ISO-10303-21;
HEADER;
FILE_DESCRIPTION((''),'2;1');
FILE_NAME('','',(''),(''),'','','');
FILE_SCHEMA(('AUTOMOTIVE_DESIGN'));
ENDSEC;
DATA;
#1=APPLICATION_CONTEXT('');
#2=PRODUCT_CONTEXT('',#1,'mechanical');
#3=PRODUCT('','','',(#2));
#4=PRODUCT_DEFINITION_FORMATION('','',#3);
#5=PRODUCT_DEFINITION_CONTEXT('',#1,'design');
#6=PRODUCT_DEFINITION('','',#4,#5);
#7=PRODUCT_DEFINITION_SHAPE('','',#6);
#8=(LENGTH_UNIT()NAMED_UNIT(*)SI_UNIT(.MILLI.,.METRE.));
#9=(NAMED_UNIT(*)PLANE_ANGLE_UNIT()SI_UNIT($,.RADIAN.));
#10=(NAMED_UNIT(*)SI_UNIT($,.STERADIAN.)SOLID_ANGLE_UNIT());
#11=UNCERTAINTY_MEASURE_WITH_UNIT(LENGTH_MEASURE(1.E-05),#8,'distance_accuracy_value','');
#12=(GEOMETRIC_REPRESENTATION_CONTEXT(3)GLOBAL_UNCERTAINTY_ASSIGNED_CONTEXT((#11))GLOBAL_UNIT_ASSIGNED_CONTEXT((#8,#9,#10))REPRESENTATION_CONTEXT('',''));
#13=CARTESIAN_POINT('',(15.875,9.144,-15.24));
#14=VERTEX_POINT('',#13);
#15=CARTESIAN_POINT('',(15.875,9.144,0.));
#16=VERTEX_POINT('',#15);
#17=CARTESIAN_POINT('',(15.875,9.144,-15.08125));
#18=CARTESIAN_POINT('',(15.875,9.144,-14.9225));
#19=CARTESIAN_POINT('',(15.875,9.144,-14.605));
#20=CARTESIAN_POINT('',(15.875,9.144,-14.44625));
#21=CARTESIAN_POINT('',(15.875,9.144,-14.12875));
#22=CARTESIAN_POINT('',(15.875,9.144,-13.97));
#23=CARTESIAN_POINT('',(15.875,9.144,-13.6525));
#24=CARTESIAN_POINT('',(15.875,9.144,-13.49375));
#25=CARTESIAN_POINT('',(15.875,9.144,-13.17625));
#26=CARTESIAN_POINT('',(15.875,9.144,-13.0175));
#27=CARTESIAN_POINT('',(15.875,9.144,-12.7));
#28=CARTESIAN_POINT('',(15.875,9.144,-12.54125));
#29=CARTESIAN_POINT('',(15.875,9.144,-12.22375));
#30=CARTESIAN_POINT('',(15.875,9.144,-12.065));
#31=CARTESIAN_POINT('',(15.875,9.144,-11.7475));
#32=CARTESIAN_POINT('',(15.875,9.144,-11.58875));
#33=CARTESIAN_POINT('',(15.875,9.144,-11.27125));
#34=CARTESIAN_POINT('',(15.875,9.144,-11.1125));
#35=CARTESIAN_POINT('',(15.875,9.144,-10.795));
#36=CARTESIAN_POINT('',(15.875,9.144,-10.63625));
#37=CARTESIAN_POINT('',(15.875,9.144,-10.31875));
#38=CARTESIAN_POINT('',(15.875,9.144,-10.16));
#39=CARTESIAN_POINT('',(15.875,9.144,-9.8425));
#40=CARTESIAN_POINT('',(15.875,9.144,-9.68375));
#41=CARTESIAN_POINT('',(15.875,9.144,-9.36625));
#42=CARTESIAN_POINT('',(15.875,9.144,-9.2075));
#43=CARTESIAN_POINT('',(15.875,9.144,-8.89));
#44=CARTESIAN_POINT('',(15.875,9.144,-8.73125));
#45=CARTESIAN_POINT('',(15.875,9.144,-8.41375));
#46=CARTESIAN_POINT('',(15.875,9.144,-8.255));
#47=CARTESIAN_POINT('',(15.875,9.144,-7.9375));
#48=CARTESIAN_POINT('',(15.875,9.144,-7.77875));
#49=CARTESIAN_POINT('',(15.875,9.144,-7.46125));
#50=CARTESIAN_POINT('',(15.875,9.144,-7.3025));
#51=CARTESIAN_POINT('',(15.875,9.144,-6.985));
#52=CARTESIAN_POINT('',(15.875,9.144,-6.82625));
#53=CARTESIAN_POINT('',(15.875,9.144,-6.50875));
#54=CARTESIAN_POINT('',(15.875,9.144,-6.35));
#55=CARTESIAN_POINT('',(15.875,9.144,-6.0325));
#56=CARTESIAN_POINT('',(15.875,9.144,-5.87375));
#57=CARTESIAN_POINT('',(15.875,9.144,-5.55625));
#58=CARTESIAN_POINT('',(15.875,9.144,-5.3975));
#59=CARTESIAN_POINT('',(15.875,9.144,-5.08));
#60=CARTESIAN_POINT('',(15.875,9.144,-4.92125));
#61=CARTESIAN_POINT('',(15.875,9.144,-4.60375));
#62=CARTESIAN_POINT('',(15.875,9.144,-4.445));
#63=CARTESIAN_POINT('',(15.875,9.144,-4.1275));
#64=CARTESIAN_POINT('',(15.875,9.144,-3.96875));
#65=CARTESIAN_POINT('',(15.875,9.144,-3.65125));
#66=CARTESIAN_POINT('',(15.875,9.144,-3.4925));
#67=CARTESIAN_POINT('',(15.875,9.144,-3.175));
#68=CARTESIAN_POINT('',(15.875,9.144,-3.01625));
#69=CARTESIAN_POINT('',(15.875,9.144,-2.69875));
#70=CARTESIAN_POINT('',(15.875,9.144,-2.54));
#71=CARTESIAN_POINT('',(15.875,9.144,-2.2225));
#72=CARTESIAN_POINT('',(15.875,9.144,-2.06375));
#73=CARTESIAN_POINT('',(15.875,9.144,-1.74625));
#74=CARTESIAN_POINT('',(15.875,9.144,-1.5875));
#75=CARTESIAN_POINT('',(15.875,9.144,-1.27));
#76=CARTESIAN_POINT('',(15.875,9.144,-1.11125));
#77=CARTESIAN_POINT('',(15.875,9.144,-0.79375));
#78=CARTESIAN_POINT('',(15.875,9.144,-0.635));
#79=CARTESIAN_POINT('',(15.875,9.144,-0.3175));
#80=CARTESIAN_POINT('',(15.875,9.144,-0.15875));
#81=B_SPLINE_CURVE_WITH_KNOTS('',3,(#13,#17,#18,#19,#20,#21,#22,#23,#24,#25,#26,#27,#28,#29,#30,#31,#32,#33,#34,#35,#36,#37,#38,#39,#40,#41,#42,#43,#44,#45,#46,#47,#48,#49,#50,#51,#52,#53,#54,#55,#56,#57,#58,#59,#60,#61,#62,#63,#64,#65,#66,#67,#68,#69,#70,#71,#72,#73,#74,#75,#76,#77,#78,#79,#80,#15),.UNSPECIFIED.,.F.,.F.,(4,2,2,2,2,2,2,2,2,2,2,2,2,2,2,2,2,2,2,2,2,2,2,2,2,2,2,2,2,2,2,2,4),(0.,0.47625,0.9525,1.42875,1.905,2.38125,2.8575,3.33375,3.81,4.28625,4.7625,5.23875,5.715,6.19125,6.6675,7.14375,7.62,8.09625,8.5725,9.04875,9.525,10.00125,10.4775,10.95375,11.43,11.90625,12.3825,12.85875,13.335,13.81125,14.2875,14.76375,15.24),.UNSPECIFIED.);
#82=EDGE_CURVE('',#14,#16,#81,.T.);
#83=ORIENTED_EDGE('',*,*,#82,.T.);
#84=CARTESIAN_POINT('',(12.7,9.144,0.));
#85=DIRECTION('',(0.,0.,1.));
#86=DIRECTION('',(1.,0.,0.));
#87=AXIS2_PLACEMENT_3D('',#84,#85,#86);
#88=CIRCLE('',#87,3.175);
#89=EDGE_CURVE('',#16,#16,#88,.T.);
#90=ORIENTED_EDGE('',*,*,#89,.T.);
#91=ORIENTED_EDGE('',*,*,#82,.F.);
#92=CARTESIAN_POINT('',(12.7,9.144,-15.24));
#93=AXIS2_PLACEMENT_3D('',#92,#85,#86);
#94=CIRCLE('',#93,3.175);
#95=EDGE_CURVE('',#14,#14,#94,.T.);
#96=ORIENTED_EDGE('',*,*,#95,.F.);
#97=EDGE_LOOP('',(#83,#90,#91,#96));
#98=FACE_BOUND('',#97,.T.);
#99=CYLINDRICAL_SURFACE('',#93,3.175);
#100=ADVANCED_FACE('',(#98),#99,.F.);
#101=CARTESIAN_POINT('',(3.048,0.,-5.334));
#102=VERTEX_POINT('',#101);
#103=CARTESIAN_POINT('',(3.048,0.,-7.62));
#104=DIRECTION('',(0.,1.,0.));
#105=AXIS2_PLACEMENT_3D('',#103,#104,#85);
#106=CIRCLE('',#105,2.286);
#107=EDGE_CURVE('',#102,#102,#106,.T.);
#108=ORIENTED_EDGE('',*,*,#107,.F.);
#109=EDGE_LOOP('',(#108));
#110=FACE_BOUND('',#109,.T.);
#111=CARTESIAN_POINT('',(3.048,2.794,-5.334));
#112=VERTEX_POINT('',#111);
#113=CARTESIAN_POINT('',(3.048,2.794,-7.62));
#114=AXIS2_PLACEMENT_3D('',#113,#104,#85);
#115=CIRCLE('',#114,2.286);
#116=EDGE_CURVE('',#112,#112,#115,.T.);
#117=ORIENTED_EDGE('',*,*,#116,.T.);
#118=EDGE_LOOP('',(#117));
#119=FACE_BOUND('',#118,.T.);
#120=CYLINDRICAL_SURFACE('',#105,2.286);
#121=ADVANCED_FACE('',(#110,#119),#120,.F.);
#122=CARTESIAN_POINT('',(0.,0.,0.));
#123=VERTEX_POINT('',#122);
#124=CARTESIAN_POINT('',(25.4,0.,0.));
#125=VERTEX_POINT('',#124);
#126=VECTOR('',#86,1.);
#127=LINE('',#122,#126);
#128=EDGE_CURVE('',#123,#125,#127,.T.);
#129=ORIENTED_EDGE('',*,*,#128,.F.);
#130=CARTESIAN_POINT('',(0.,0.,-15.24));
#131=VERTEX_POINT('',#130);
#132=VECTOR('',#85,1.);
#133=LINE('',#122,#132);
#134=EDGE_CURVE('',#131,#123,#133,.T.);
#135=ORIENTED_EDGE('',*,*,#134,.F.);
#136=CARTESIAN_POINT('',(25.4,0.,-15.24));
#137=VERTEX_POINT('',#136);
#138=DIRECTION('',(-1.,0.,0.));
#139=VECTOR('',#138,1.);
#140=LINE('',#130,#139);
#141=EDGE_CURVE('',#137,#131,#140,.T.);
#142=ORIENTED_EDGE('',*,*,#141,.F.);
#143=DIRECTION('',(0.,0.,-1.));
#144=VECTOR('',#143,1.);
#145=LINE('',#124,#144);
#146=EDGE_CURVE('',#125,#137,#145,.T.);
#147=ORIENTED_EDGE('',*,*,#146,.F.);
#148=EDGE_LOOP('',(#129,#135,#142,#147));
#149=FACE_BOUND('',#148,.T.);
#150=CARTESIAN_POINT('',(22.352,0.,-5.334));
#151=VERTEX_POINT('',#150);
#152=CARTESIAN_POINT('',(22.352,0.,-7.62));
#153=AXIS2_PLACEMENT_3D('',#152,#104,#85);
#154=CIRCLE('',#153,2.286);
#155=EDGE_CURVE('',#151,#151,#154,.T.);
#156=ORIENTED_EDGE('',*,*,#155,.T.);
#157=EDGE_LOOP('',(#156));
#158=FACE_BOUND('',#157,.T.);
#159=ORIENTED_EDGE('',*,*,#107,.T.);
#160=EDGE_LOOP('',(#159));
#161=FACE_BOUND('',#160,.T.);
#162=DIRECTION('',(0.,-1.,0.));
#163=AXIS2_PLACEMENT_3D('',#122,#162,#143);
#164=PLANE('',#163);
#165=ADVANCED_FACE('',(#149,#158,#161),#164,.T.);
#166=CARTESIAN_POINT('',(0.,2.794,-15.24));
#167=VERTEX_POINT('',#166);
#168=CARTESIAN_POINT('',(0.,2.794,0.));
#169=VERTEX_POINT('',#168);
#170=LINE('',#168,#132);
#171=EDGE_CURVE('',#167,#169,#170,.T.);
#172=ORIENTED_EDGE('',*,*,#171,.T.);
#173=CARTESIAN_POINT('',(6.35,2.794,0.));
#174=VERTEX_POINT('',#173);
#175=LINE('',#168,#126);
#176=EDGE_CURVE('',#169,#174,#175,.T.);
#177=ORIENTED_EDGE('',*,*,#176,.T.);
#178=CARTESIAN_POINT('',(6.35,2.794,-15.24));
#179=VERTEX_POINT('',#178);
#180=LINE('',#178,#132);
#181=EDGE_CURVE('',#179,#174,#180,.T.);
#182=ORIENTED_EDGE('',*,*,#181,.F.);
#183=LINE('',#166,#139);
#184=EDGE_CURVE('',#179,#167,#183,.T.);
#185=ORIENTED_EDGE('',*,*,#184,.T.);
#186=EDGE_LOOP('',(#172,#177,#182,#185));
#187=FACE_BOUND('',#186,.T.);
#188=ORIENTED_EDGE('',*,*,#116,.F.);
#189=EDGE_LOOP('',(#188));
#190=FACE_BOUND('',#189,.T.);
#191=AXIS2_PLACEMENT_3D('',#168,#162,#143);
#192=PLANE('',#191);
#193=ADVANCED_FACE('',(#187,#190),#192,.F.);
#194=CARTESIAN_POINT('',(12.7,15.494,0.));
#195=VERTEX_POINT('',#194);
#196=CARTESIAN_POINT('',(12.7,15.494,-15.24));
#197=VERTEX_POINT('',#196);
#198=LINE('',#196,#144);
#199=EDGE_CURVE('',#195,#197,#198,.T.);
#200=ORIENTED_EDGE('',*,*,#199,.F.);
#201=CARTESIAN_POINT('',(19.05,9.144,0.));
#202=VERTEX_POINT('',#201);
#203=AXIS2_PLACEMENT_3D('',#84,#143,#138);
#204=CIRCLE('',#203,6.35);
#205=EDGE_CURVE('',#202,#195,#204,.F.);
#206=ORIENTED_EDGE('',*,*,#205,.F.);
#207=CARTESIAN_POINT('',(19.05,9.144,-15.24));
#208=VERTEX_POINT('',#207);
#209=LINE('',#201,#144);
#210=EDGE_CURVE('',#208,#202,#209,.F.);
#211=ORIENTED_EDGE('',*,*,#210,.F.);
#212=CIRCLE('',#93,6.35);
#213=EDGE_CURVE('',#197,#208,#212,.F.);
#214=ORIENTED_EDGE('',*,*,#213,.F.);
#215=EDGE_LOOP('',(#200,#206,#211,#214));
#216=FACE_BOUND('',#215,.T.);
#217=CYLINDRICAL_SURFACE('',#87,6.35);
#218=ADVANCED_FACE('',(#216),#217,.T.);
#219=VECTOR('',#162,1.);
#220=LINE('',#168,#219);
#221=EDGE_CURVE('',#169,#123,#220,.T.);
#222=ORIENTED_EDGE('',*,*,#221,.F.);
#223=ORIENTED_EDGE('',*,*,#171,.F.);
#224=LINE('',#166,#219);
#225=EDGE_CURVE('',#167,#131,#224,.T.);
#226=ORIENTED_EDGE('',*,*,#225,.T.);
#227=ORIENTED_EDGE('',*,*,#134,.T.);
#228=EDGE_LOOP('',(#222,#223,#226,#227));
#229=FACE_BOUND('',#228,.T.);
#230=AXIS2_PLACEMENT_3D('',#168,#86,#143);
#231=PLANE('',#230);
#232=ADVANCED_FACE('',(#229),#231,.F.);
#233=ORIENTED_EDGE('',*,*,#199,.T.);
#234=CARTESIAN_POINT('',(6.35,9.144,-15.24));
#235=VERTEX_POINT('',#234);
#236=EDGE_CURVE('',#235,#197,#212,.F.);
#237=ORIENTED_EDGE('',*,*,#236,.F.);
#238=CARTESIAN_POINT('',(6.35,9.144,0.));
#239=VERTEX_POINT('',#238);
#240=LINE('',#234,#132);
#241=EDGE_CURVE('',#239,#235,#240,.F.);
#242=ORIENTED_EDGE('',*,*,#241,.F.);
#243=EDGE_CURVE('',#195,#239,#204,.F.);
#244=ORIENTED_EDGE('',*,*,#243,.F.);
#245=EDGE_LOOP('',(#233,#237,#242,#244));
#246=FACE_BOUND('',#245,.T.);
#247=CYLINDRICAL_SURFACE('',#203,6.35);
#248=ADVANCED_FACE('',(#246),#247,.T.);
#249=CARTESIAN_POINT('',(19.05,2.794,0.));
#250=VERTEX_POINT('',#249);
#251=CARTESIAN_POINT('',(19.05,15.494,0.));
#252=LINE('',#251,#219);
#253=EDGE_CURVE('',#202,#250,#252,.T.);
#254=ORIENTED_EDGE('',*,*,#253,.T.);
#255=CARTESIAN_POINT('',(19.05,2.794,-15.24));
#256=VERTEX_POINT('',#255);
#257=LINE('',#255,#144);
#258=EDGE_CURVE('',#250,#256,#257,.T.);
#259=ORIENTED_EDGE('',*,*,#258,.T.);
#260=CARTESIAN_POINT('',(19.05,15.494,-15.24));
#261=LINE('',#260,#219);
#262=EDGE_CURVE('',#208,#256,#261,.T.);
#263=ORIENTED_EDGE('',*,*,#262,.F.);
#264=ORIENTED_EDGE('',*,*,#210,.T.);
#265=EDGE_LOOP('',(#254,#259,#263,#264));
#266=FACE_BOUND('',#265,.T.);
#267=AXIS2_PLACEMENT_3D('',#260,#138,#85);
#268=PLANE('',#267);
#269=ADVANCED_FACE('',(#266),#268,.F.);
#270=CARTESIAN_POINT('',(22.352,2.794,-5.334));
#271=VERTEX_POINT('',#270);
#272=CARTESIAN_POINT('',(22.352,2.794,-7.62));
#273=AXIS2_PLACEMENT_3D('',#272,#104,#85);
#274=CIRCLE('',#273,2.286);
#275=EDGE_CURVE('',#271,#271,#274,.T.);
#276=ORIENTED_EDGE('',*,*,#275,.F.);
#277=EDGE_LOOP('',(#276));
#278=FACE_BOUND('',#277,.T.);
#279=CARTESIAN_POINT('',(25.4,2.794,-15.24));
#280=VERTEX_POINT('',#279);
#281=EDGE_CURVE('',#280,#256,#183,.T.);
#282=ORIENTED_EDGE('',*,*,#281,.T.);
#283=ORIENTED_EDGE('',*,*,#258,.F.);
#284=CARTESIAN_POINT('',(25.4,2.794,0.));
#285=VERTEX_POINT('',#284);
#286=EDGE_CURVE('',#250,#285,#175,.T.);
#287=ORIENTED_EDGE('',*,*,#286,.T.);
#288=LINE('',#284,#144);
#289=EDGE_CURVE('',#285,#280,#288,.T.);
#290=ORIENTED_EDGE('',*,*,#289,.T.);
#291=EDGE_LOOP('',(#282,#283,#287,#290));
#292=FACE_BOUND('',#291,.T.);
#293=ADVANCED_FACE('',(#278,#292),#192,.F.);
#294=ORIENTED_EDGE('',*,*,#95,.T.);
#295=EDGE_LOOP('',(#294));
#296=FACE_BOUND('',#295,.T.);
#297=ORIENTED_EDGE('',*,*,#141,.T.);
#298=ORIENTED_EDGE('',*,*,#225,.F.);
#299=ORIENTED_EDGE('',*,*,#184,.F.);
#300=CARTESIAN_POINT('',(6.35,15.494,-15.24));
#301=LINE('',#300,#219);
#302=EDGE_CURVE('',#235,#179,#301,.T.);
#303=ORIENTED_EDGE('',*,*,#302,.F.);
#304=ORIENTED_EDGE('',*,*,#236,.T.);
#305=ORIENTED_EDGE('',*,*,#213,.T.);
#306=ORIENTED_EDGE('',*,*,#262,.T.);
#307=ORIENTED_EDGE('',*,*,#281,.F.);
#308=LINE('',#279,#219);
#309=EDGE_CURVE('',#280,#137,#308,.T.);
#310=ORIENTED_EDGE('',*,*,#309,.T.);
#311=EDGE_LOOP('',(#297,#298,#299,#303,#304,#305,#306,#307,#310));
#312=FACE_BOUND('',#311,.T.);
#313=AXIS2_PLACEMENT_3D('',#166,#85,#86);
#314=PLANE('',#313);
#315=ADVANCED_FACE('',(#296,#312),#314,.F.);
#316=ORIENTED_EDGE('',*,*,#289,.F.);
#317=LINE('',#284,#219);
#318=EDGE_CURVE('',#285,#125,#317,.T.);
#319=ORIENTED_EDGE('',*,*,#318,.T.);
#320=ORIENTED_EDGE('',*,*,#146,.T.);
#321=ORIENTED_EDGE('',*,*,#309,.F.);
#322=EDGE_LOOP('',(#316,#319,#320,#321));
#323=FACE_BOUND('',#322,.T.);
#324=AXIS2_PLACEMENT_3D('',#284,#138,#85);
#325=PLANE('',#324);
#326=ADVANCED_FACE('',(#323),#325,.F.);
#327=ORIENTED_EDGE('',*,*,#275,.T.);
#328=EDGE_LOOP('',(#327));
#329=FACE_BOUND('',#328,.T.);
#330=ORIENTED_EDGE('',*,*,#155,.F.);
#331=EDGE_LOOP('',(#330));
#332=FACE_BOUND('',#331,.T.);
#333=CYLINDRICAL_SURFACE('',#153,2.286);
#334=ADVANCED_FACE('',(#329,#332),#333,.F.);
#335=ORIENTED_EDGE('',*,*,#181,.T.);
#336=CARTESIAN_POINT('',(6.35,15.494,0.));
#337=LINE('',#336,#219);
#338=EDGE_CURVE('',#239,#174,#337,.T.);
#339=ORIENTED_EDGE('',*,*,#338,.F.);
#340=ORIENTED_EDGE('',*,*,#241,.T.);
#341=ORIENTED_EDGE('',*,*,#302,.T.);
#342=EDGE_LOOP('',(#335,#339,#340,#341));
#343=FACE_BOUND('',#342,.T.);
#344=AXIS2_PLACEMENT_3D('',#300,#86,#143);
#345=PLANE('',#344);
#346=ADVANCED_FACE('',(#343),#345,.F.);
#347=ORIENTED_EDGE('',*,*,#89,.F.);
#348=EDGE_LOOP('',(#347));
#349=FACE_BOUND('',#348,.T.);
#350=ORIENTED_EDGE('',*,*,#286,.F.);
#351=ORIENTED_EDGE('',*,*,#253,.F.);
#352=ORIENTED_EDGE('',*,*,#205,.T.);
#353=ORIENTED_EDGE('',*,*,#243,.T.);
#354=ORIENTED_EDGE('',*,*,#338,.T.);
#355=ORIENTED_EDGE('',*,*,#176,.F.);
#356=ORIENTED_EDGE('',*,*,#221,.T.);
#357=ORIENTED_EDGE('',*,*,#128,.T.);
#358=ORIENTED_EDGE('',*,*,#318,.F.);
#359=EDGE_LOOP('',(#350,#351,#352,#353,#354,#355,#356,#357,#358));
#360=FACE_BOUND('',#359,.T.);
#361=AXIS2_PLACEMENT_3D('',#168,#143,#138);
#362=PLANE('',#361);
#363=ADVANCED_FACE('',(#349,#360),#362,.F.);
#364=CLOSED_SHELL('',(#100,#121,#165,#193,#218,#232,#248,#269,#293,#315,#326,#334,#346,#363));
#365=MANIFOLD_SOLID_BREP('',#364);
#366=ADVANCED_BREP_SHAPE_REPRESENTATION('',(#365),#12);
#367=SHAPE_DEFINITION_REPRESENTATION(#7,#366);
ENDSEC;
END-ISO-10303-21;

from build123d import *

# Parameters (mm, degrees)
SKETCH1_W           = 25.4
SKETCH1_H           = 15.24
BOSS_EXTRUDE1_DEPTH = 2.794
SKETCH2_W           = 12.7
SKETCH2_H           = 15.24
BOSS_EXTRUDE2_DEPTH = 12.7
FILLET1_R           = 6.35
SKETCH3_R           = 3.175
CUT_EXTRUDE1_DEPTH  = 34.428754628
SKETCH4_R           = 2.286
CUT_EXTRUDE2_DEPTH  = 33.228986953


with BuildPart() as part:
    # Sketch1 → Boss-Extrude1 (new body)
    with BuildSketch(Plane(origin=(0, 0, 0), x_dir=(1, 0, 0), z_dir=(0, 1, 0))):
        with Locations((12.7, 7.62)):
            Rectangle(SKETCH1_W, SKETCH1_H)
    extrude(amount=BOSS_EXTRUDE1_DEPTH)

    # Sketch2 → Boss-Extrude2 (add)
    with BuildSketch(Plane(origin=(0, 2.794, 0), x_dir=(1, 0, 0), z_dir=(0, 1, 0))):
        with Locations((12.7, 7.62)):
            Rectangle(SKETCH2_W, SKETCH2_H)
    extrude(amount=BOSS_EXTRUDE2_DEPTH)

    # Fillet1
    fillet1_edges = [part.edges().sort_by_distance(p)[0] for p in [
        (6.35, 15.494, -7.62),
        (19.05, 15.494, -7.62),
    ]]
    fillet(fillet1_edges, radius=FILLET1_R - 0.0001)  # a hair under: the kernel refuses the full size

    # Sketch3 → Cut-Extrude1 (cut, through all)
    with BuildSketch(Plane.XY):
        with Locations((12.7, 9.144)):
            Circle(SKETCH3_R)
    extrude(amount=-CUT_EXTRUDE1_DEPTH, mode=Mode.SUBTRACT)

    # Sketch4 → Cut-Extrude2 (cut, through all)
    with BuildSketch(Plane(origin=(0, 2.794, 0), x_dir=(1, 0, 0), z_dir=(0, 1, 0))):
        with Locations(Location((3.048, 7.62, 0), (0, 0, 270))):
            Circle(SKETCH4_R)
        with Locations(Location((22.352, 7.62, 0), (0, 0, 270))):
            Circle(SKETCH4_R)
    extrude(amount=-CUT_EXTRUDE2_DEPTH, mode=Mode.SUBTRACT)


solid = part.part
